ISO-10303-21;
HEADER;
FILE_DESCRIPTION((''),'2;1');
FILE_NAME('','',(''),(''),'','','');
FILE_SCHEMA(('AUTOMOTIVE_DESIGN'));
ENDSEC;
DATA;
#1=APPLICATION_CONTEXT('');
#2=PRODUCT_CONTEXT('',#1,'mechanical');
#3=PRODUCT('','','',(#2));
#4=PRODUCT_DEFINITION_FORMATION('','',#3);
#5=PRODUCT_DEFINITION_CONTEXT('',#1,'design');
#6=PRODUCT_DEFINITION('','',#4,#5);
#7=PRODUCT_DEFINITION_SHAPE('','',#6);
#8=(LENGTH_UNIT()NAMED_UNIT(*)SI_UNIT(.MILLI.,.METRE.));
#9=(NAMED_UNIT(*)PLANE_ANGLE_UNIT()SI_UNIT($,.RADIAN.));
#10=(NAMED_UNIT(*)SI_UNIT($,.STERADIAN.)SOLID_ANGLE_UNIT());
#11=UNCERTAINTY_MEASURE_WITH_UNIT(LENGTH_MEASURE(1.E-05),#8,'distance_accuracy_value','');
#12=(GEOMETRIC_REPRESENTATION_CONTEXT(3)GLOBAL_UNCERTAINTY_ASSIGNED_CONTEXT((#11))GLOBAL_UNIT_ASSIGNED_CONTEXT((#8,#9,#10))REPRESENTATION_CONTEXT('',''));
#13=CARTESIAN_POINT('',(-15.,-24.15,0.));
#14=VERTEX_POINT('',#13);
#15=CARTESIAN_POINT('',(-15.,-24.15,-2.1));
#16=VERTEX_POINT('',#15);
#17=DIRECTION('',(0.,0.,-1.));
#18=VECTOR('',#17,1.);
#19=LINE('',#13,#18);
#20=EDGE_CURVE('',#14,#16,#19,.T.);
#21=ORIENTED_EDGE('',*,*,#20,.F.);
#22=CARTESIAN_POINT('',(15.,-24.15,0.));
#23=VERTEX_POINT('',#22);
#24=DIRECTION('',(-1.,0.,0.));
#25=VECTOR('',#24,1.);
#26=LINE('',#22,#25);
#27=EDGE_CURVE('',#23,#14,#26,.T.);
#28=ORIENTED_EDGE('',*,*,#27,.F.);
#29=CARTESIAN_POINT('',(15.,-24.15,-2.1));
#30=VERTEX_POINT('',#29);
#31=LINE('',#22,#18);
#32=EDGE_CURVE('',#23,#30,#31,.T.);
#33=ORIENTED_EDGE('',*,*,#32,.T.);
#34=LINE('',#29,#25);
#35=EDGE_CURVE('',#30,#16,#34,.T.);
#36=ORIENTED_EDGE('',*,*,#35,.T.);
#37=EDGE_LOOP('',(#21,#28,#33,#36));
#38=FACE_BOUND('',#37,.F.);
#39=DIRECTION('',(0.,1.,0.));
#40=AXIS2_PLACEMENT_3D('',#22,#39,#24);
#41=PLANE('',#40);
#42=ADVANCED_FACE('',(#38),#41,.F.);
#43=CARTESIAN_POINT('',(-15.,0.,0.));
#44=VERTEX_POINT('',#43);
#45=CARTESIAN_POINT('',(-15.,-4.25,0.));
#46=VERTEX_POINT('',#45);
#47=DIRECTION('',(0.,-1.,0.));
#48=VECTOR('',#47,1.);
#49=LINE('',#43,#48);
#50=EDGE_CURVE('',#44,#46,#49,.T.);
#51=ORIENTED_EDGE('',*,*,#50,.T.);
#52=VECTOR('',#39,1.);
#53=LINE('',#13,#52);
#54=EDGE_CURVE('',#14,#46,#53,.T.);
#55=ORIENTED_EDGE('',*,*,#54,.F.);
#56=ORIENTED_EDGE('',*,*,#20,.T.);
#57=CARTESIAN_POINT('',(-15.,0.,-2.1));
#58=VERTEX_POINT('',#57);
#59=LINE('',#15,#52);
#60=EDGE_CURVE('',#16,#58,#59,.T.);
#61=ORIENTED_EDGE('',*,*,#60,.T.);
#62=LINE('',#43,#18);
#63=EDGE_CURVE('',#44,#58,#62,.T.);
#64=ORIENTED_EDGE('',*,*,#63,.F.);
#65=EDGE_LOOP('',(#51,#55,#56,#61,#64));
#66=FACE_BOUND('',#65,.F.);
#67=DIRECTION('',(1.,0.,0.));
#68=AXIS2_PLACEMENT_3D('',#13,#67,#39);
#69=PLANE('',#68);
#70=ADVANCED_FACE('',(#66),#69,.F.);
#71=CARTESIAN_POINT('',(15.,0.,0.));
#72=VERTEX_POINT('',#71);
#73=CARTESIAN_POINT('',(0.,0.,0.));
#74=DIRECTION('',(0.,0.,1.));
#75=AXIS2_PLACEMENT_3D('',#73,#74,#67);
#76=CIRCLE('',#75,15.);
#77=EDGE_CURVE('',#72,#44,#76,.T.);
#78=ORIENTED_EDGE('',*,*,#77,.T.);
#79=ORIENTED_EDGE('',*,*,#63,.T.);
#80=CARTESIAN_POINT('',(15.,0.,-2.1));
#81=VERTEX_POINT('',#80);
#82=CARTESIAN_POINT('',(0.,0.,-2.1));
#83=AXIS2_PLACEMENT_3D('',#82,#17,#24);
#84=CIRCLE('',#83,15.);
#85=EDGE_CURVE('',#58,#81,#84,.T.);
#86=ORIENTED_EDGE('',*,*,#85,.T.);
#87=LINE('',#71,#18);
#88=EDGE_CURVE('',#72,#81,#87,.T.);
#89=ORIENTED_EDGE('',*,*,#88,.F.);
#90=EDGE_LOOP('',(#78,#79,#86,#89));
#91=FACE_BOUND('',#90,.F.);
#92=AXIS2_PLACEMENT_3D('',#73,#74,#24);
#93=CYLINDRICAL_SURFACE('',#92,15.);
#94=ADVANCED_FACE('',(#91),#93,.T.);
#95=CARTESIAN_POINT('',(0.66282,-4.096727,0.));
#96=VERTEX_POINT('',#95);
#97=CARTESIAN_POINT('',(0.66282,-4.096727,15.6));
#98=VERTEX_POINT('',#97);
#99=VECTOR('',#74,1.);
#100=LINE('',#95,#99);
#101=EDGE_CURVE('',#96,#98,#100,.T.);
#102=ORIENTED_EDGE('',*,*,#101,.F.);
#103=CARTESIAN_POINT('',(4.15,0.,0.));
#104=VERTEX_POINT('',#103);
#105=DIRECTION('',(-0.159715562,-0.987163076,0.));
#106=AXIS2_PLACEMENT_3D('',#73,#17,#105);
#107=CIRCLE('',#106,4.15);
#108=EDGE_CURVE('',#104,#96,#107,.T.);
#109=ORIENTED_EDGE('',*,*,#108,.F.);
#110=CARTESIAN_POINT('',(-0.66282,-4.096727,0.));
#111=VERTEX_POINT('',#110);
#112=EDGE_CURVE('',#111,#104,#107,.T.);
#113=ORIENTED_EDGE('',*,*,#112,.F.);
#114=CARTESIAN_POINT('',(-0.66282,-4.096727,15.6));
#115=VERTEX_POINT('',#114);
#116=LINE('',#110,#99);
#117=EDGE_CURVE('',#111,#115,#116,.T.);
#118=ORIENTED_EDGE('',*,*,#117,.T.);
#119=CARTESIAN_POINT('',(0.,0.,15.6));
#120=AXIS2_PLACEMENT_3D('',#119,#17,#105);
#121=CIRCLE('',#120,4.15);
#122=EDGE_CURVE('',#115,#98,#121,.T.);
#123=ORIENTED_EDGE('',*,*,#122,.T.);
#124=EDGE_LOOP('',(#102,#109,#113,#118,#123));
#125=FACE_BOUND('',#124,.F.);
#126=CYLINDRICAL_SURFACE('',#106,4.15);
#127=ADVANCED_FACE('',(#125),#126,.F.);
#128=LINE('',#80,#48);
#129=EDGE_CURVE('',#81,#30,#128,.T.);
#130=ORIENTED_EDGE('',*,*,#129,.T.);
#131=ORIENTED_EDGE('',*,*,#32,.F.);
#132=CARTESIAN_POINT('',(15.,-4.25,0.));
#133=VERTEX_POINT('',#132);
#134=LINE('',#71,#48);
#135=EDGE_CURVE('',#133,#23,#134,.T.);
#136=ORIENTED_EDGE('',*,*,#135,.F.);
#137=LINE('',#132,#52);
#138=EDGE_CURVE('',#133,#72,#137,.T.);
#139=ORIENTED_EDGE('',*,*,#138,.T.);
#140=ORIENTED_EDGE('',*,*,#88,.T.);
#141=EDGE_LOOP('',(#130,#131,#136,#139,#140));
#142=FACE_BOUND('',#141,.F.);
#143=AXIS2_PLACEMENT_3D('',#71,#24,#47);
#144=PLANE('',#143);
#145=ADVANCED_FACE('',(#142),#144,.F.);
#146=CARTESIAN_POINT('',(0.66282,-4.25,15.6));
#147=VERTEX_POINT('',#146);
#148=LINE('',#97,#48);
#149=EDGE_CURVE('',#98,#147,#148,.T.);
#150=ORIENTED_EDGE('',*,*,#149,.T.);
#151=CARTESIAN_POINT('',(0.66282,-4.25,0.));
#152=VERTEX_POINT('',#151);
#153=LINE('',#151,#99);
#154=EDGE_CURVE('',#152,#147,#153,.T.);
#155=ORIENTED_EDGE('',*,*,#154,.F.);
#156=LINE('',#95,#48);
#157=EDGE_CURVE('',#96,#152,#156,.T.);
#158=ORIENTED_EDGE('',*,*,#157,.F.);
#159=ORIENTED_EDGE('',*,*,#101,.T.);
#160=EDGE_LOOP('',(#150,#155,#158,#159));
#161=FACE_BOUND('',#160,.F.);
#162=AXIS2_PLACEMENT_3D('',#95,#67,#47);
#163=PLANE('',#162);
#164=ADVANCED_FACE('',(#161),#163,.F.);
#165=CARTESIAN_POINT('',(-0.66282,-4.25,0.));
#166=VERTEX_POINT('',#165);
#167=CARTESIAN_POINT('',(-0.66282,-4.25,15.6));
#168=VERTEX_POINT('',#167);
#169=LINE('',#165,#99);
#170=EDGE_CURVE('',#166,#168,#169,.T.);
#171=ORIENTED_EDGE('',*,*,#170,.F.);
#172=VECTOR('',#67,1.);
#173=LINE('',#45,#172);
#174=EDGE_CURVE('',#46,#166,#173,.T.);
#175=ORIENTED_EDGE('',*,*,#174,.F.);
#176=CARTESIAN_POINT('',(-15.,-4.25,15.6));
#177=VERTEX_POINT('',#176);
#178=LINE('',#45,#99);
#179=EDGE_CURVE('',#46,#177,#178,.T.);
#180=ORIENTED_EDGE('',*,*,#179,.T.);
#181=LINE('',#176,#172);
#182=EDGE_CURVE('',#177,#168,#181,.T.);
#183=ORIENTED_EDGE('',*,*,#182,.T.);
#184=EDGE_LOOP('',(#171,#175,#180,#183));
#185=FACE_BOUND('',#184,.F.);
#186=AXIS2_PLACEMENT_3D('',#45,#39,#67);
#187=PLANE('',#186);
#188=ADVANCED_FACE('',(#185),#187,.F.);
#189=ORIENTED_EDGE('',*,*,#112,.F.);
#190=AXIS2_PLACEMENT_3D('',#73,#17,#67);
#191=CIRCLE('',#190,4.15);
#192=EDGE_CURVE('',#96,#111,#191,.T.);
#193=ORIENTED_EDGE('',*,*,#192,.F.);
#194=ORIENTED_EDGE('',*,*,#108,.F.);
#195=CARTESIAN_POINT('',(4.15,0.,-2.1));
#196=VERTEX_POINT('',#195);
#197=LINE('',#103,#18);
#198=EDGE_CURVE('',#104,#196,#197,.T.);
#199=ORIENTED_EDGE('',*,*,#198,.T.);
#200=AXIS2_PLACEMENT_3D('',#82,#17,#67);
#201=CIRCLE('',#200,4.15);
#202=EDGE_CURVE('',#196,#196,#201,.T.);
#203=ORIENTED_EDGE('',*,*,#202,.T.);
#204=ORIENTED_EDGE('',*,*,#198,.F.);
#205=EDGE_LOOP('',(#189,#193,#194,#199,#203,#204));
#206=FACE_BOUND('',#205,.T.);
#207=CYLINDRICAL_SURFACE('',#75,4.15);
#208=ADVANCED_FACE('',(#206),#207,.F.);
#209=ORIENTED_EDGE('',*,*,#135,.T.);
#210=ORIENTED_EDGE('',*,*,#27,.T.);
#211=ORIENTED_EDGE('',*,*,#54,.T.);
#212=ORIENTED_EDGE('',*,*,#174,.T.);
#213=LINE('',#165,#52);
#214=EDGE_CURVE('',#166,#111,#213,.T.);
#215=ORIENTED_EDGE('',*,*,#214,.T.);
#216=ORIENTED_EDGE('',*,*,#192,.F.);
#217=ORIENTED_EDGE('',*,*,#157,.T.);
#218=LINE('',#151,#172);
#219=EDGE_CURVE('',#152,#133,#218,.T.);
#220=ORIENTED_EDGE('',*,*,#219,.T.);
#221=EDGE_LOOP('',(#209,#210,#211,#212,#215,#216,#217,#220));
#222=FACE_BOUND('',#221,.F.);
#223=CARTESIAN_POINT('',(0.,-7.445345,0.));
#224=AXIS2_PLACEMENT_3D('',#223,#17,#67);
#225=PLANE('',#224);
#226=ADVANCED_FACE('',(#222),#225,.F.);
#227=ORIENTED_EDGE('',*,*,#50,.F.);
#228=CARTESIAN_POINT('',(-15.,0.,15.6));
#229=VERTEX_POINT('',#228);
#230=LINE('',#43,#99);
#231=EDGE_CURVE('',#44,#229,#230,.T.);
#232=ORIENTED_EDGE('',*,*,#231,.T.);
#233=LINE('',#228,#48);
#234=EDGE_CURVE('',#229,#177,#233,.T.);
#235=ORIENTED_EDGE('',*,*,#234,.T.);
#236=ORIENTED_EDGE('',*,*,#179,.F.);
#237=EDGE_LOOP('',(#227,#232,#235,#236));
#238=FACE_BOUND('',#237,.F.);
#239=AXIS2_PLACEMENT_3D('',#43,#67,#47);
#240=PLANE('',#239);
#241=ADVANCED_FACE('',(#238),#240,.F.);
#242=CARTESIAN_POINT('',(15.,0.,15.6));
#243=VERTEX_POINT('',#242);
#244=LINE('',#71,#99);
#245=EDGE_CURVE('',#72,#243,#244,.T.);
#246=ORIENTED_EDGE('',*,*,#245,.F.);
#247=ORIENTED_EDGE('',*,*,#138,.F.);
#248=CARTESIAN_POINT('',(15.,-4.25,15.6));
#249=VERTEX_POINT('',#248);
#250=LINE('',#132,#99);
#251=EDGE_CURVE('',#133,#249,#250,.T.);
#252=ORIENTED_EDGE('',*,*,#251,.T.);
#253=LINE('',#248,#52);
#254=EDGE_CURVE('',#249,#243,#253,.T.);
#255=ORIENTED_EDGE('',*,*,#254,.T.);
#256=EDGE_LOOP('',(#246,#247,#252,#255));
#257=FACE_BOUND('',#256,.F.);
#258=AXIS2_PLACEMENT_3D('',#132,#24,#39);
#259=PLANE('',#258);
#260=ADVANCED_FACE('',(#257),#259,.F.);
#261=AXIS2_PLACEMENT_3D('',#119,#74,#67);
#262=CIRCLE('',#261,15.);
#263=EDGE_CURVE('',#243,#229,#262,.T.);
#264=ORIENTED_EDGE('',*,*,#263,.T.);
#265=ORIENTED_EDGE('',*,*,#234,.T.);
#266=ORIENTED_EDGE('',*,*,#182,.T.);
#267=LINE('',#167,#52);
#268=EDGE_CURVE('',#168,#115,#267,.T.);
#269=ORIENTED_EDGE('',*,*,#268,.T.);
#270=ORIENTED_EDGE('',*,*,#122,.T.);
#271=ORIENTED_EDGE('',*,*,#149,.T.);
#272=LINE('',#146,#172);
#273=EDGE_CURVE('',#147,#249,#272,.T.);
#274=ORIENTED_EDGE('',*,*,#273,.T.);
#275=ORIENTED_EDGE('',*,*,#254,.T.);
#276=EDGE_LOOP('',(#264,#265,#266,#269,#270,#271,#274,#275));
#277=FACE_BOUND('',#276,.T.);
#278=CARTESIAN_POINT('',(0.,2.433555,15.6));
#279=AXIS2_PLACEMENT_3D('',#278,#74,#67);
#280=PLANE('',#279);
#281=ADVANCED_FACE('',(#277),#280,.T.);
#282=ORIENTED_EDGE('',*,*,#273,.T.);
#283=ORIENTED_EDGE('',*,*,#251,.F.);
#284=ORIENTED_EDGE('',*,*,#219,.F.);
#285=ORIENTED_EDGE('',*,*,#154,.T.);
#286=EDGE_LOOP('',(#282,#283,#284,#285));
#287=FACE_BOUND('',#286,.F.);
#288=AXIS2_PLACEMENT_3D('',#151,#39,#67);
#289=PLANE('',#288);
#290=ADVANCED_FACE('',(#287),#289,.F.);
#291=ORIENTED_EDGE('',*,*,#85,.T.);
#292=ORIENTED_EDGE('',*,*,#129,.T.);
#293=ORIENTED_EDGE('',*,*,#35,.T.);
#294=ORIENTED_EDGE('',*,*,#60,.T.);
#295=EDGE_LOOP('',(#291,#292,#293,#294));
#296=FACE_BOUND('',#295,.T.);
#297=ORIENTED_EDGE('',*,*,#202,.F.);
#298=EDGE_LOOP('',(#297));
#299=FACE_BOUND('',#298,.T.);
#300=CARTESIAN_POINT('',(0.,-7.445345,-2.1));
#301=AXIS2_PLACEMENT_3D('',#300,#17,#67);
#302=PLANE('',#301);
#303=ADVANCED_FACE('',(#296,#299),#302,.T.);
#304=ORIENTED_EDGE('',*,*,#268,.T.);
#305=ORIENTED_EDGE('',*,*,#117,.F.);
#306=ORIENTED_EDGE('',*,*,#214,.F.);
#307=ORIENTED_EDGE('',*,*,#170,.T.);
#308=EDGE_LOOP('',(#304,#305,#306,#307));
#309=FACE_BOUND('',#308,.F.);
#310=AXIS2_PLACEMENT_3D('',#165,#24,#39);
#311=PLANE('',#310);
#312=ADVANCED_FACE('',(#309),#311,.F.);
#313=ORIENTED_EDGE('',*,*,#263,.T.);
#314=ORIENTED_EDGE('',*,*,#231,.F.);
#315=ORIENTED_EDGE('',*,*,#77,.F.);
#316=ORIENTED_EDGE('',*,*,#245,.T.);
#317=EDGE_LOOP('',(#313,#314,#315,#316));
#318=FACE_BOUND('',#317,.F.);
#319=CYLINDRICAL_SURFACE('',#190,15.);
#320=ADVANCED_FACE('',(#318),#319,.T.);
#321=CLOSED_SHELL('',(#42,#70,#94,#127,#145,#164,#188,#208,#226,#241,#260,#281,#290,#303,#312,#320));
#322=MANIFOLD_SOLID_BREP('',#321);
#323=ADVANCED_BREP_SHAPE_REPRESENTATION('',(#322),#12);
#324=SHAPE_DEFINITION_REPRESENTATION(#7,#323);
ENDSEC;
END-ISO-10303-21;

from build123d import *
from build123d import SkipClean  # not in build123d's __all__

# Parameters (mm, degrees)
F1_DEPTH = 15.6
F2_R     = 4.15
F3_DEPTH = 2.1


with BuildPart() as f1:
    # F0 (on Top) → F1 (new body)
    with BuildSketch(Plane.XY):
        with BuildLine():
            ThreePointArc((-0.6628195804, -4.096726767), (0, 4.15), (0.6628195804, -4.096726767))
            Line((0.6628195804, -4.096726767), (0.6628195804, -4.25))
            Line((0.6628195804, -4.25), (15, -4.25))
            Line((15, -4.25), (15, 0))
            ThreePointArc((15, 0), (0, 15), (-15, 0))
            Line((-15, 0), (-15, -4.25))
            Line((-15, -4.25), (-0.6628195804, -4.25))
            Line((-0.6628195804, -4.25), (-0.6628195804, -4.096726767))
        make_face()
    extrude(amount=F1_DEPTH)

    # F2 (on face) → F3 (join)
    with BuildSketch(Plane(origin=(0, 0, 0), x_dir=(1, 0, 0), z_dir=(0, 0, -1))):
        with BuildLine():
            ThreePointArc((-15, 0), (0, -15), (15, 0))
            Line((15, 0), (15, 24.15))
            Line((15, 24.15), (-15, 24.15))
            Line((-15, 24.15), (-15, 0))
        make_face()
        Circle(F2_R, mode=Mode.SUBTRACT)
    with SkipClean():  # cleaning this boolean's faces spoils the solid; the shape is the same uncleaned
        extrude(amount=F3_DEPTH)


solid = f1.part
